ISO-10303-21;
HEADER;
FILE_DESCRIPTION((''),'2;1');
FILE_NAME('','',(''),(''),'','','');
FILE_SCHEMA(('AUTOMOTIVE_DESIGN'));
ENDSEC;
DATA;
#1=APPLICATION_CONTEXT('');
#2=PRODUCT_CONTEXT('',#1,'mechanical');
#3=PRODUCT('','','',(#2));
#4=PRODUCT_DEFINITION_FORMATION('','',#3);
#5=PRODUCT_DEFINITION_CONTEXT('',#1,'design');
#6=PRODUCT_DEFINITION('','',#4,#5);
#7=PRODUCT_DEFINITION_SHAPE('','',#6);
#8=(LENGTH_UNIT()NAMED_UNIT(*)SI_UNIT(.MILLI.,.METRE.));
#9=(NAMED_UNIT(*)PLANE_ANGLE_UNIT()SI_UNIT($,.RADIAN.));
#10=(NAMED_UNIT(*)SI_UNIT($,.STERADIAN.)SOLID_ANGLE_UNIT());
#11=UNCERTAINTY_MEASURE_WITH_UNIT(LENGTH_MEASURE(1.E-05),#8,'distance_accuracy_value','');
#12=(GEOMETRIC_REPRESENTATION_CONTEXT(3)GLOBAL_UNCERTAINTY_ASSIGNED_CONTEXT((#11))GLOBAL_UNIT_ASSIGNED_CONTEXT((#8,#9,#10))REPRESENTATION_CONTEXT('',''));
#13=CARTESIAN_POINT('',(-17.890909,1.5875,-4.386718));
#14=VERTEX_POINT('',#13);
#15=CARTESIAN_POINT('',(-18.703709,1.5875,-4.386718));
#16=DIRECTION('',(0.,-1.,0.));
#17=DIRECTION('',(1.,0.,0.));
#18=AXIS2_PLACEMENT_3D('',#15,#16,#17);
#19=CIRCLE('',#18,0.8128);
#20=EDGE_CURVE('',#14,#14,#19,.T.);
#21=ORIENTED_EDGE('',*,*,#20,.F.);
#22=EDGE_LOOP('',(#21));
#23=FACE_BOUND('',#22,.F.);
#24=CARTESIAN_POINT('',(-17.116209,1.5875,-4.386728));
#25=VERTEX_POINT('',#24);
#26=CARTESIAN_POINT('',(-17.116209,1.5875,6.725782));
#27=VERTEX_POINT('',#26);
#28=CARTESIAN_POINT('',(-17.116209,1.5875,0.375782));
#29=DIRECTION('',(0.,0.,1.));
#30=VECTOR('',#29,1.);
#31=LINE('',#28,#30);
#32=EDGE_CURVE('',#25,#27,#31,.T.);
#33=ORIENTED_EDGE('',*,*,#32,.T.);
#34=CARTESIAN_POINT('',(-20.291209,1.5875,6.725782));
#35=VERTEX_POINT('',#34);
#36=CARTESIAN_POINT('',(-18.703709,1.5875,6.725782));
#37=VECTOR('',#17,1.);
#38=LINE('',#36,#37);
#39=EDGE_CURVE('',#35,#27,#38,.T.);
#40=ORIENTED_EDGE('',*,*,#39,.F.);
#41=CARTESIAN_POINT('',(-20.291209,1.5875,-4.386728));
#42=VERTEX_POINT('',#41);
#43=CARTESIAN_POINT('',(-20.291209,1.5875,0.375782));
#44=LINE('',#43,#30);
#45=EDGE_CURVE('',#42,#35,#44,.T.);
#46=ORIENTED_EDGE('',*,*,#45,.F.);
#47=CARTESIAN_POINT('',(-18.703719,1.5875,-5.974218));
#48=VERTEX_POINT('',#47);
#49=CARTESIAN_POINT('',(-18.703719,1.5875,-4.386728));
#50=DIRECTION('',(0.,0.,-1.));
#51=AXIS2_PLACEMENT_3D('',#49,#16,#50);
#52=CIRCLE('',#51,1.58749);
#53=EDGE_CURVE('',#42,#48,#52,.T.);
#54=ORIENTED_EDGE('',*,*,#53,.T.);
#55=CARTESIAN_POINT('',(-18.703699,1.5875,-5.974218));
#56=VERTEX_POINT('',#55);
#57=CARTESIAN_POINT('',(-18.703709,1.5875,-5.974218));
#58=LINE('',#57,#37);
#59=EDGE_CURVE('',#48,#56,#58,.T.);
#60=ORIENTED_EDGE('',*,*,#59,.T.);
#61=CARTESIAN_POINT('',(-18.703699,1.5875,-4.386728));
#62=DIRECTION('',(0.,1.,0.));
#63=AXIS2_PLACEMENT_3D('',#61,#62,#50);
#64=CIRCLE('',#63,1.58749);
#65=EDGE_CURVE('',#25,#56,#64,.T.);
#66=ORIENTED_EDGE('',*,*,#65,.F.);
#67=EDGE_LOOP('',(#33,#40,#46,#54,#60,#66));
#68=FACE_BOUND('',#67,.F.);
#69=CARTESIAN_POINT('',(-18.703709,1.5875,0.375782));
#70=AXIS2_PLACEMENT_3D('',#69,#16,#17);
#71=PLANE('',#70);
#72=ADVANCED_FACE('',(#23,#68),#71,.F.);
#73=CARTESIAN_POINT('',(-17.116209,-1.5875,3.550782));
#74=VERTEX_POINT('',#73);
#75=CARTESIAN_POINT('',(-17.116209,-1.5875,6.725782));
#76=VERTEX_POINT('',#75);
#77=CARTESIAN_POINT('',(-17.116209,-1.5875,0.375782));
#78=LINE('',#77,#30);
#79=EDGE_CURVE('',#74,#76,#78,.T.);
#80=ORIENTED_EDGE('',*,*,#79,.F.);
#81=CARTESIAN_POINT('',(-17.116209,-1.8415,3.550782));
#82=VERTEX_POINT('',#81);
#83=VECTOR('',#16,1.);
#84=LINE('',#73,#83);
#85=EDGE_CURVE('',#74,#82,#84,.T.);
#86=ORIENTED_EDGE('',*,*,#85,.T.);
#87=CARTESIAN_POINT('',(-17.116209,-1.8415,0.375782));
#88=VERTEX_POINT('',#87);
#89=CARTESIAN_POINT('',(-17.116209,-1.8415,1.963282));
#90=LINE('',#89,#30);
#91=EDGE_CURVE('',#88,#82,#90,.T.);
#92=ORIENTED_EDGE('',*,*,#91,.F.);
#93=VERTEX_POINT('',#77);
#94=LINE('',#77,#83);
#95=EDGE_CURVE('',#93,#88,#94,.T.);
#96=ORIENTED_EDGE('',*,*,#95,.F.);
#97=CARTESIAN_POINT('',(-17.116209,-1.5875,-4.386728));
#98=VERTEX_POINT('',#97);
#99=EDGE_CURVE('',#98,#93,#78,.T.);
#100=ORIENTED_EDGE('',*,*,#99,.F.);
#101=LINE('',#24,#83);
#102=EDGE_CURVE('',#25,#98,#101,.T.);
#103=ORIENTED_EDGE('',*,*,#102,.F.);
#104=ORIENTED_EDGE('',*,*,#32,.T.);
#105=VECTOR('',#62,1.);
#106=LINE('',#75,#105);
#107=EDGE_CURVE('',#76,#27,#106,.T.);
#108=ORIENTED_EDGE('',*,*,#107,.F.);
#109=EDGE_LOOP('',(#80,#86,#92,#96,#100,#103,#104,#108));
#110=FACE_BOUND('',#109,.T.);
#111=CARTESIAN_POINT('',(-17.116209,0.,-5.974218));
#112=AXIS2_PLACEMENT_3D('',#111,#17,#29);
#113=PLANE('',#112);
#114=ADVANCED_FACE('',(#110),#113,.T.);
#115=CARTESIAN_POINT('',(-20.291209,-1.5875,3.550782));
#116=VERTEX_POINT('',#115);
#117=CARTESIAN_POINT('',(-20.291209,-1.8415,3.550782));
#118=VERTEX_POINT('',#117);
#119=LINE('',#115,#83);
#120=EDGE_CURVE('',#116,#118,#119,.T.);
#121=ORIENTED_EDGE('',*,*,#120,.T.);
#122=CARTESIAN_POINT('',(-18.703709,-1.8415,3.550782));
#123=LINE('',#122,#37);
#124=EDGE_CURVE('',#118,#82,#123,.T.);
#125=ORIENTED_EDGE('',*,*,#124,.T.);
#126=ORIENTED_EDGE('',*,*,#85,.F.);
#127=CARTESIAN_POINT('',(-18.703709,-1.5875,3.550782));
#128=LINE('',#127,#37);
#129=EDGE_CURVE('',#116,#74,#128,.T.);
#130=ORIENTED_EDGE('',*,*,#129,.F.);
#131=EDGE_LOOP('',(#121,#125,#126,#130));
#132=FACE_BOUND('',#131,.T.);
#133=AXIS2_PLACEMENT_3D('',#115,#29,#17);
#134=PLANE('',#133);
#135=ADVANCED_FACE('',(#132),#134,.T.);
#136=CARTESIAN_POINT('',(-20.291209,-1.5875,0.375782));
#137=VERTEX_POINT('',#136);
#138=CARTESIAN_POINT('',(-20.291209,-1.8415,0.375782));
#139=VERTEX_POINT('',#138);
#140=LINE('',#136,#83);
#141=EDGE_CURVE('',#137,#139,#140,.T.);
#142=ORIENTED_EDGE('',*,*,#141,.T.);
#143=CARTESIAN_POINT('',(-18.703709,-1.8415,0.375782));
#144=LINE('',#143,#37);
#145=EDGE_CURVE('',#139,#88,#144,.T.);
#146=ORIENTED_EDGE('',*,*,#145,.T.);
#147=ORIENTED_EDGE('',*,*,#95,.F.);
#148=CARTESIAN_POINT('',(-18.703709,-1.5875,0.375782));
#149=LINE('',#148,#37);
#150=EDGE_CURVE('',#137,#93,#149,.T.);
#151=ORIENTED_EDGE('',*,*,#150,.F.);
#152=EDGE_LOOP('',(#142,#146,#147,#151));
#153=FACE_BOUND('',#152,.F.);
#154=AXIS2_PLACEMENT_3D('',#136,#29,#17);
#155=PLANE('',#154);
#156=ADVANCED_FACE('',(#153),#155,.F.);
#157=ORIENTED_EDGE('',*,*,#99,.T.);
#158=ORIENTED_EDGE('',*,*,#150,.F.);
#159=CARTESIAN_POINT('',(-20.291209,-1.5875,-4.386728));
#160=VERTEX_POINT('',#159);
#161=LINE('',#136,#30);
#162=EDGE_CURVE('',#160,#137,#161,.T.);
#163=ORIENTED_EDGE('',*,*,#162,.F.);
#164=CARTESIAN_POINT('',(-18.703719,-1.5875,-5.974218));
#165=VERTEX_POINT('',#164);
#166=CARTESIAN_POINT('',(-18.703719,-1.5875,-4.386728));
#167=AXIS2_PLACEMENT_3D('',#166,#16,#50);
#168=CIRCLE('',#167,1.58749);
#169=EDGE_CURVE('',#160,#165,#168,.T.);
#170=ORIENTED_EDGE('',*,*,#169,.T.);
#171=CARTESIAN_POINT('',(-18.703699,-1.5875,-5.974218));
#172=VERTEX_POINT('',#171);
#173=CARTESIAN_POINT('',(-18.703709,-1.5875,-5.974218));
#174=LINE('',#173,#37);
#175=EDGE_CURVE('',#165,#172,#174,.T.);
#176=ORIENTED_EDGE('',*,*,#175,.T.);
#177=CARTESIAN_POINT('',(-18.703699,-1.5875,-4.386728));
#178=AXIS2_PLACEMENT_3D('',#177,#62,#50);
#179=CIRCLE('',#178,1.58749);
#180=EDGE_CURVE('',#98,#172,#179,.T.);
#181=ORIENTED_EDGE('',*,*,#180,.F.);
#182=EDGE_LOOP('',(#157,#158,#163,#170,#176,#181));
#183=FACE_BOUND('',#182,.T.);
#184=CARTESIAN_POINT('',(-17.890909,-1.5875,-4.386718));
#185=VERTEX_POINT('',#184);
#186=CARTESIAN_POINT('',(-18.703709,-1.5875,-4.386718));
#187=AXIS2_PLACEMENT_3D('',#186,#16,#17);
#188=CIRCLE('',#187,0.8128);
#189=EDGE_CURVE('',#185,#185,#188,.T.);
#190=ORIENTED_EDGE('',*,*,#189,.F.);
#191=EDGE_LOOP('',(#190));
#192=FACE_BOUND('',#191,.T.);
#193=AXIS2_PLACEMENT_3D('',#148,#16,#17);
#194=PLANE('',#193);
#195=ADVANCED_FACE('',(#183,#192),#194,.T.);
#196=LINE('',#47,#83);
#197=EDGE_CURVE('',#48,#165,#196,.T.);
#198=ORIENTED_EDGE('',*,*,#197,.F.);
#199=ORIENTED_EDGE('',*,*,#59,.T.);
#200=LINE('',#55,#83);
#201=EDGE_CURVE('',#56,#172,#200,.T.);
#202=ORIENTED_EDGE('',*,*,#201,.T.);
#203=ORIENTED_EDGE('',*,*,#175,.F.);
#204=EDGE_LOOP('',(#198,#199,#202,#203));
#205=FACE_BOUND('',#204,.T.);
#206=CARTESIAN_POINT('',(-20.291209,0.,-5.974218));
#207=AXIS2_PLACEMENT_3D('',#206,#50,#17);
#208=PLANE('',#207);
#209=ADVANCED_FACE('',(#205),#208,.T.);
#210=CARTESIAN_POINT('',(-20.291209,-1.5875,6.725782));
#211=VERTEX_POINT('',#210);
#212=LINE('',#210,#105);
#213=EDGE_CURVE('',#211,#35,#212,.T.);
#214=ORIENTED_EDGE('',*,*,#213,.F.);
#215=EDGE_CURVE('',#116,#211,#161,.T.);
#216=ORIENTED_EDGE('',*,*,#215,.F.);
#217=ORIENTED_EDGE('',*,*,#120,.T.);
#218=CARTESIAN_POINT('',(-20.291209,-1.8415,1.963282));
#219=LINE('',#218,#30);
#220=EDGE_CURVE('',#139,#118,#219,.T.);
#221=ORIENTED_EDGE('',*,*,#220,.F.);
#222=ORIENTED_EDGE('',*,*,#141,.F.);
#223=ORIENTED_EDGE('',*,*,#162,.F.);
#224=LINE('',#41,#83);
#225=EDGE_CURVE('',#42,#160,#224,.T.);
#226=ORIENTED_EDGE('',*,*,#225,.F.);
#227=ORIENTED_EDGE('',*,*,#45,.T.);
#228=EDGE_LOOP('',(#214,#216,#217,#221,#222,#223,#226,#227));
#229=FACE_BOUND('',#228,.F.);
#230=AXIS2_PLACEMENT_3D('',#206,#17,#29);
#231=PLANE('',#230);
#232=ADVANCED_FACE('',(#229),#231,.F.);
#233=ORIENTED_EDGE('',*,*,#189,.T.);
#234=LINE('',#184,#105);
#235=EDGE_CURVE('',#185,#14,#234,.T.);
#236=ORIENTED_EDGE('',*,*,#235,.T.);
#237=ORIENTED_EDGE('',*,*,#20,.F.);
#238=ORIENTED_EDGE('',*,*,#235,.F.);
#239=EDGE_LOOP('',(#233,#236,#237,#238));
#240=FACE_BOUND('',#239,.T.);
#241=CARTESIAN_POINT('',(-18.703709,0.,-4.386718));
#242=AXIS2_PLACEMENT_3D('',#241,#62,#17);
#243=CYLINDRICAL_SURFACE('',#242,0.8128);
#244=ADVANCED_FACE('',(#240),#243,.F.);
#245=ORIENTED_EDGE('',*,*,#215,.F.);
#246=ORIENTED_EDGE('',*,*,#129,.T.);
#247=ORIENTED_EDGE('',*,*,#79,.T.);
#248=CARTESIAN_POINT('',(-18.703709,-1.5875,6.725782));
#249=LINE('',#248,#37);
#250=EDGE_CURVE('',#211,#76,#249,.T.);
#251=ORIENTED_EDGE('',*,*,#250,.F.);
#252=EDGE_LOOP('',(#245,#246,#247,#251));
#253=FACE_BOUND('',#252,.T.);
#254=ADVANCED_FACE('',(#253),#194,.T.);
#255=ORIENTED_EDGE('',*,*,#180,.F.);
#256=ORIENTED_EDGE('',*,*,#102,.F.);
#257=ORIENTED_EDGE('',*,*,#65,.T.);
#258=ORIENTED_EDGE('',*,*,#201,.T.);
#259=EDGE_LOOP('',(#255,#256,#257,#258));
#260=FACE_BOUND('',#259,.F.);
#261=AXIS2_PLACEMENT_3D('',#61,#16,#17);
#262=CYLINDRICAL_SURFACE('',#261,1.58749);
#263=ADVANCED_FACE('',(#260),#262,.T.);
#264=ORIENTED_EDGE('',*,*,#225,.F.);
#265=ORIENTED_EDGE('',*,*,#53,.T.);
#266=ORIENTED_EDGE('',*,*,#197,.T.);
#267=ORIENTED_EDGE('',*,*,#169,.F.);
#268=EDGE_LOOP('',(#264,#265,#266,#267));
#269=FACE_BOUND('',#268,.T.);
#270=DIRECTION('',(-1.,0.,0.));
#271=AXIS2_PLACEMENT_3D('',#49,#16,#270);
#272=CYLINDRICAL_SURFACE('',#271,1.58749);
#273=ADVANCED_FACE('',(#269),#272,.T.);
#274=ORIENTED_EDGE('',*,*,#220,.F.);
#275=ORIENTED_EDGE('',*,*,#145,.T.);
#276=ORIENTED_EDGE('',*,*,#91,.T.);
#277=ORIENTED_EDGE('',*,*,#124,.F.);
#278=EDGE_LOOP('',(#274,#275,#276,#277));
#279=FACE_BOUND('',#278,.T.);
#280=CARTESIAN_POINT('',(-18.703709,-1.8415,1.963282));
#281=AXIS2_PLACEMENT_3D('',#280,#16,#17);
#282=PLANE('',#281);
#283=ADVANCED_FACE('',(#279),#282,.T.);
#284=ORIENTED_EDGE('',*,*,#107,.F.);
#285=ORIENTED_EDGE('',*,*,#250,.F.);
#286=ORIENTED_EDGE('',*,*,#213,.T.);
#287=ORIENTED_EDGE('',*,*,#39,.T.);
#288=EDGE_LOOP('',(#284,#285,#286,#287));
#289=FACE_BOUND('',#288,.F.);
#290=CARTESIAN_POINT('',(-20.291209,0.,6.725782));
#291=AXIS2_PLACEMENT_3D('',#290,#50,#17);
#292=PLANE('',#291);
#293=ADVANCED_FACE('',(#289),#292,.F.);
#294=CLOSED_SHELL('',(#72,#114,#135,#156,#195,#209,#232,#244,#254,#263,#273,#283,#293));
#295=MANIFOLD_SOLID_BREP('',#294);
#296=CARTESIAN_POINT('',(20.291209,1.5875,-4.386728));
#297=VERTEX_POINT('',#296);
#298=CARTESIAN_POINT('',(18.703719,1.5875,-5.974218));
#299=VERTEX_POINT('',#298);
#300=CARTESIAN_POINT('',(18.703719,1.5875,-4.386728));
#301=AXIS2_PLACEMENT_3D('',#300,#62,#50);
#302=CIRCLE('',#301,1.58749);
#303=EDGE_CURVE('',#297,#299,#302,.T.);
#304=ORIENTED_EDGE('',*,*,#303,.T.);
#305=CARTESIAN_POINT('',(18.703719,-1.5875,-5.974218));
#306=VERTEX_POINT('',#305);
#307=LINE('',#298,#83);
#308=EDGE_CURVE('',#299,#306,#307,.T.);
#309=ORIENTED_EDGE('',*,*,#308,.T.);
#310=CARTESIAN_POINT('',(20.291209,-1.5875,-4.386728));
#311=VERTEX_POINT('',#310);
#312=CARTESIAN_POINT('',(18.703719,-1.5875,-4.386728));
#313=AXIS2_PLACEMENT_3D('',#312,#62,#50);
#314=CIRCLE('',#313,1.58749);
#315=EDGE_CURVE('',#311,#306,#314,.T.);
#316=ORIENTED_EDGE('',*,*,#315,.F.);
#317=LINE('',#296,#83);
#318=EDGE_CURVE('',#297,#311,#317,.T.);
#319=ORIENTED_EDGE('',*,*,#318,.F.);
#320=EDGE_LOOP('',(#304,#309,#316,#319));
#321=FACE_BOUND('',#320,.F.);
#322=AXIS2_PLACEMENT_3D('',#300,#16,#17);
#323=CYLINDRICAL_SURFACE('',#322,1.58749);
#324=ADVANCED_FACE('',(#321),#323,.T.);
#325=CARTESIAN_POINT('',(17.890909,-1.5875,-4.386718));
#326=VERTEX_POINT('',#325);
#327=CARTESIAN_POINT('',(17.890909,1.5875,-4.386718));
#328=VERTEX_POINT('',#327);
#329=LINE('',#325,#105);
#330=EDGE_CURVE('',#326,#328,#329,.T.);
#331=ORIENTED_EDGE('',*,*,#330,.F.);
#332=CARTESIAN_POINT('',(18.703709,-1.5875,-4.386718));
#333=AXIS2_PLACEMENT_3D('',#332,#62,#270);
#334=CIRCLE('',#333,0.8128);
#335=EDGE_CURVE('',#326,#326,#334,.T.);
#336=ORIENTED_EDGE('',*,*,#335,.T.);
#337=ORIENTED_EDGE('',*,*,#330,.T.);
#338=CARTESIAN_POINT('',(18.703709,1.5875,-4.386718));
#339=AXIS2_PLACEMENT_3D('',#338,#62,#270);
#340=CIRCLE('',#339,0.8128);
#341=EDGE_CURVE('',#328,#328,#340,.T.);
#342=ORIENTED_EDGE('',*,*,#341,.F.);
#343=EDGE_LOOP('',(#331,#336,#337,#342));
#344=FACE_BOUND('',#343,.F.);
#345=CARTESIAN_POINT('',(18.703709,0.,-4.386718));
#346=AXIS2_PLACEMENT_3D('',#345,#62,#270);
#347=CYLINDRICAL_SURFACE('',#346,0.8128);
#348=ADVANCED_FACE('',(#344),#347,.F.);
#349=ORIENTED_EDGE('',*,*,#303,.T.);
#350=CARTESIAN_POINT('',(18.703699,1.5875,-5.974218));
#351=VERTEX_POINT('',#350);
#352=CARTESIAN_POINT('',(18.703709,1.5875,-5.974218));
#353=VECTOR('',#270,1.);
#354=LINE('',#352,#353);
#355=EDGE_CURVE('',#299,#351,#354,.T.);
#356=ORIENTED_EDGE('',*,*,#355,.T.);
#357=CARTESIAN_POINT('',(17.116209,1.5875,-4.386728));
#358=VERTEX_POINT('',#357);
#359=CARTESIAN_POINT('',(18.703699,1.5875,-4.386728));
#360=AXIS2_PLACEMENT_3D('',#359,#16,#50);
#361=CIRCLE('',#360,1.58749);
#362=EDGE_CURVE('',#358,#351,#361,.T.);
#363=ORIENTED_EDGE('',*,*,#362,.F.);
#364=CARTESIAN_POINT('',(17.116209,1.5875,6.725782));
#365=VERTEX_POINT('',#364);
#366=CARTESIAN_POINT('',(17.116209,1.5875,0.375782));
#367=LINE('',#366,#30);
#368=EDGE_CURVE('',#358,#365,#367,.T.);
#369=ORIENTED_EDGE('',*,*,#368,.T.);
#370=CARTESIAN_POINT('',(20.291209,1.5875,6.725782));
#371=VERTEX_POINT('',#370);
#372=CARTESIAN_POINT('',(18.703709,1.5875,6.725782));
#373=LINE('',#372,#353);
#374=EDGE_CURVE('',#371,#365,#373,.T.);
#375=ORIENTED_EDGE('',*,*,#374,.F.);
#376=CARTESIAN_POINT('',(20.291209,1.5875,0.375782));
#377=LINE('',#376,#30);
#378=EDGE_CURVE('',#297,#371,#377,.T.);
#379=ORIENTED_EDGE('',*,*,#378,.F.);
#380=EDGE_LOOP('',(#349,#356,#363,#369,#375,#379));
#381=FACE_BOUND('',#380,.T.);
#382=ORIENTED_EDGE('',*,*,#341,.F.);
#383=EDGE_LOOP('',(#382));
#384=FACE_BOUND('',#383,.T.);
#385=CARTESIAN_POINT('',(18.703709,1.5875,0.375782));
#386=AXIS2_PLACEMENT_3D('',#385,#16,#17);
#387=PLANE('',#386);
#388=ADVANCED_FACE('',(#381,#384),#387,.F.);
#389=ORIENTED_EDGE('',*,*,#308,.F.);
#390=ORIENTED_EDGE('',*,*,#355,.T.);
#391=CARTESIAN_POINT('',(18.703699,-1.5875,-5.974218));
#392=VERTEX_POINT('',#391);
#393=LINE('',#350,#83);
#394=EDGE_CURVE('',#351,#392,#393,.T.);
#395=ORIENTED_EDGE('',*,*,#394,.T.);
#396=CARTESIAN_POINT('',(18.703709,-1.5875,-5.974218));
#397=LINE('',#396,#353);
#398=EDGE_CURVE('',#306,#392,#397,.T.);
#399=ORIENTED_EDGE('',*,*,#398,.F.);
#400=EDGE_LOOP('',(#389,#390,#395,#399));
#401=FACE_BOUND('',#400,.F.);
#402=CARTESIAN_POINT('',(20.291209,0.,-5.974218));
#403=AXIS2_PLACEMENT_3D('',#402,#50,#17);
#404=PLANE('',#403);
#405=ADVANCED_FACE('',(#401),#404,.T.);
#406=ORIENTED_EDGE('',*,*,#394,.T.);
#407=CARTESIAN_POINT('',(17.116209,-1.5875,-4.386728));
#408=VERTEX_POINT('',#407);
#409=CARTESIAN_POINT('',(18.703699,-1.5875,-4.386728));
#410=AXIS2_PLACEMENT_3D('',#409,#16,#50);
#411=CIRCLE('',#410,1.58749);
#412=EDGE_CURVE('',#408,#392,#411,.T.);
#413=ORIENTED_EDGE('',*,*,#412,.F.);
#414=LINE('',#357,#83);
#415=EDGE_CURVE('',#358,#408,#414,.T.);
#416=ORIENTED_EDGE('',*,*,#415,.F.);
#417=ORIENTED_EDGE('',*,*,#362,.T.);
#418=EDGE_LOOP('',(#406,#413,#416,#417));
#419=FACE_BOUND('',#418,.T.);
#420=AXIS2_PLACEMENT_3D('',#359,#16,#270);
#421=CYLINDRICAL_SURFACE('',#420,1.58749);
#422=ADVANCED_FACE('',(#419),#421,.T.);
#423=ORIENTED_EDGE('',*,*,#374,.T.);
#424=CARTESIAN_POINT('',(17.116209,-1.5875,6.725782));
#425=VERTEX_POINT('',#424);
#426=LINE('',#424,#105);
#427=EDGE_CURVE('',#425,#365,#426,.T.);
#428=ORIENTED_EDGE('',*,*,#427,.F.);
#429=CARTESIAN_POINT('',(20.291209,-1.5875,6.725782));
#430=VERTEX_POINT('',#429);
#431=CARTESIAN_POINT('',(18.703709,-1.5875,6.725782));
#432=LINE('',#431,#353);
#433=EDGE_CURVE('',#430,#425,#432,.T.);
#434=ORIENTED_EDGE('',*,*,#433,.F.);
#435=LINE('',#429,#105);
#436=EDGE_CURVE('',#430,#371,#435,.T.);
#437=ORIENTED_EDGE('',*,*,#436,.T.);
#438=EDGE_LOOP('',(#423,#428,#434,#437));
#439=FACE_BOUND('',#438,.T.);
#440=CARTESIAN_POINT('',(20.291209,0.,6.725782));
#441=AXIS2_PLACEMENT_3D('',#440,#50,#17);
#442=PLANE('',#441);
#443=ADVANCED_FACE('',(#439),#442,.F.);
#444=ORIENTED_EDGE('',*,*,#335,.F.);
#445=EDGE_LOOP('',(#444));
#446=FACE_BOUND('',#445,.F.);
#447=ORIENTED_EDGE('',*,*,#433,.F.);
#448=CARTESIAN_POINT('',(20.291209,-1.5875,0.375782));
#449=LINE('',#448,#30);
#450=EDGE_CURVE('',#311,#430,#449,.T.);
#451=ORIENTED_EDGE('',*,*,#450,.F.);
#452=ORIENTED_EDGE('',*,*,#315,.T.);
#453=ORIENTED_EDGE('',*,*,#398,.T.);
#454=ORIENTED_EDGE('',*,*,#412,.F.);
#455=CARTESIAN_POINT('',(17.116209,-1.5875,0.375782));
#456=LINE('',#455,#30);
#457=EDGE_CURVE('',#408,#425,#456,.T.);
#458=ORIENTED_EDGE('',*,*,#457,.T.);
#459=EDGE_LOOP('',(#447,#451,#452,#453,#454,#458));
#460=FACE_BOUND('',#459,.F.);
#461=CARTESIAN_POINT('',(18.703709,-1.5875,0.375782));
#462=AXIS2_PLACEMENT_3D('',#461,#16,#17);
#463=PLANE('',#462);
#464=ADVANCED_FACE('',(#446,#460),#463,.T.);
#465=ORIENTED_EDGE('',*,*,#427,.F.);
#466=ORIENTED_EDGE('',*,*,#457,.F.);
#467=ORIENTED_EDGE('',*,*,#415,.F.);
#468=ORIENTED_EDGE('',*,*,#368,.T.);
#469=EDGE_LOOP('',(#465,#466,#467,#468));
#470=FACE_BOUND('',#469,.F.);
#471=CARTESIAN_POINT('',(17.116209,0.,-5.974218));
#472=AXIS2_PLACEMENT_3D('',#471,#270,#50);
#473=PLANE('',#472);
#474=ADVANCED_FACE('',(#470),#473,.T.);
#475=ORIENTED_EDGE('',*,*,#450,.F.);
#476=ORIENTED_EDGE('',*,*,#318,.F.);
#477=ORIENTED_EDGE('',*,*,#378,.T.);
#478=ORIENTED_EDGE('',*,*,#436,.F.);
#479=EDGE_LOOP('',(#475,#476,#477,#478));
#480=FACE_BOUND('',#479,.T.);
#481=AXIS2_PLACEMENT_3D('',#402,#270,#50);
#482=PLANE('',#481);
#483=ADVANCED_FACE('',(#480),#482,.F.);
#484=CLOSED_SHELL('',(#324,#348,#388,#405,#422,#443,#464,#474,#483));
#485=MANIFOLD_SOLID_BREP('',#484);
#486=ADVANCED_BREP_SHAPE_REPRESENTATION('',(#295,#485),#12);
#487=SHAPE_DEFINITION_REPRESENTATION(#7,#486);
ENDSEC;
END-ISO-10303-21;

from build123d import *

# Parameters (mm, degrees)
F0_W     = 3.175
F0_H     = 12.7
F0_R     = 0.8128
F1_DEPTH = 1.5875
F2_R     = 1.58749
F4_W     = 3.175
F4_H     = 3.175
F5_DEPTH = 0.254


# Not quite as in the source:
# - a fillet or chamfer is up to 0.001 mm smaller than in the source, because OpenCascade refuses the exact size


with BuildPart() as f1:
    # F0 (on Front) → F1 (new body, symmetric)
    with BuildSketch(Plane.XZ):
        with Locations((-18.7037093565, 0.3757816428)):
            Rectangle(F0_W, F0_H)
        with Locations((-18.7037093565, -4.3867183572)):
            Circle(F0_R, mode=Mode.SUBTRACT)
    extrude(amount=F1_DEPTH, both=True)

    # F2 (radius 1.5875 in the source; OpenCascade refuses exactly that, so slightly less here)
    f2_edges = [f1.edges().sort_by_distance(p)[0] for p in [
        (-20.291209, 0, -5.974218),
        (-17.116209, 0, -5.974218),
    ]]
    fillet(f2_edges, radius=F2_R)


with BuildPart() as f3_1:
    # F3: instance of F1
    add(f1.part.mirror(Plane.YZ))


with BuildPart() as f1_1:
    add(f1.part)

    # F4 (on face) → F5 (join)
    with BuildSketch(Plane.XZ.offset(1.5875)):
        with Locations((-18.7037093565, 1.9632816428)):
            Rectangle(F4_W, F4_H)
    extrude(amount=F5_DEPTH)


solid = Compound([f3_1.part, f1_1.part])
